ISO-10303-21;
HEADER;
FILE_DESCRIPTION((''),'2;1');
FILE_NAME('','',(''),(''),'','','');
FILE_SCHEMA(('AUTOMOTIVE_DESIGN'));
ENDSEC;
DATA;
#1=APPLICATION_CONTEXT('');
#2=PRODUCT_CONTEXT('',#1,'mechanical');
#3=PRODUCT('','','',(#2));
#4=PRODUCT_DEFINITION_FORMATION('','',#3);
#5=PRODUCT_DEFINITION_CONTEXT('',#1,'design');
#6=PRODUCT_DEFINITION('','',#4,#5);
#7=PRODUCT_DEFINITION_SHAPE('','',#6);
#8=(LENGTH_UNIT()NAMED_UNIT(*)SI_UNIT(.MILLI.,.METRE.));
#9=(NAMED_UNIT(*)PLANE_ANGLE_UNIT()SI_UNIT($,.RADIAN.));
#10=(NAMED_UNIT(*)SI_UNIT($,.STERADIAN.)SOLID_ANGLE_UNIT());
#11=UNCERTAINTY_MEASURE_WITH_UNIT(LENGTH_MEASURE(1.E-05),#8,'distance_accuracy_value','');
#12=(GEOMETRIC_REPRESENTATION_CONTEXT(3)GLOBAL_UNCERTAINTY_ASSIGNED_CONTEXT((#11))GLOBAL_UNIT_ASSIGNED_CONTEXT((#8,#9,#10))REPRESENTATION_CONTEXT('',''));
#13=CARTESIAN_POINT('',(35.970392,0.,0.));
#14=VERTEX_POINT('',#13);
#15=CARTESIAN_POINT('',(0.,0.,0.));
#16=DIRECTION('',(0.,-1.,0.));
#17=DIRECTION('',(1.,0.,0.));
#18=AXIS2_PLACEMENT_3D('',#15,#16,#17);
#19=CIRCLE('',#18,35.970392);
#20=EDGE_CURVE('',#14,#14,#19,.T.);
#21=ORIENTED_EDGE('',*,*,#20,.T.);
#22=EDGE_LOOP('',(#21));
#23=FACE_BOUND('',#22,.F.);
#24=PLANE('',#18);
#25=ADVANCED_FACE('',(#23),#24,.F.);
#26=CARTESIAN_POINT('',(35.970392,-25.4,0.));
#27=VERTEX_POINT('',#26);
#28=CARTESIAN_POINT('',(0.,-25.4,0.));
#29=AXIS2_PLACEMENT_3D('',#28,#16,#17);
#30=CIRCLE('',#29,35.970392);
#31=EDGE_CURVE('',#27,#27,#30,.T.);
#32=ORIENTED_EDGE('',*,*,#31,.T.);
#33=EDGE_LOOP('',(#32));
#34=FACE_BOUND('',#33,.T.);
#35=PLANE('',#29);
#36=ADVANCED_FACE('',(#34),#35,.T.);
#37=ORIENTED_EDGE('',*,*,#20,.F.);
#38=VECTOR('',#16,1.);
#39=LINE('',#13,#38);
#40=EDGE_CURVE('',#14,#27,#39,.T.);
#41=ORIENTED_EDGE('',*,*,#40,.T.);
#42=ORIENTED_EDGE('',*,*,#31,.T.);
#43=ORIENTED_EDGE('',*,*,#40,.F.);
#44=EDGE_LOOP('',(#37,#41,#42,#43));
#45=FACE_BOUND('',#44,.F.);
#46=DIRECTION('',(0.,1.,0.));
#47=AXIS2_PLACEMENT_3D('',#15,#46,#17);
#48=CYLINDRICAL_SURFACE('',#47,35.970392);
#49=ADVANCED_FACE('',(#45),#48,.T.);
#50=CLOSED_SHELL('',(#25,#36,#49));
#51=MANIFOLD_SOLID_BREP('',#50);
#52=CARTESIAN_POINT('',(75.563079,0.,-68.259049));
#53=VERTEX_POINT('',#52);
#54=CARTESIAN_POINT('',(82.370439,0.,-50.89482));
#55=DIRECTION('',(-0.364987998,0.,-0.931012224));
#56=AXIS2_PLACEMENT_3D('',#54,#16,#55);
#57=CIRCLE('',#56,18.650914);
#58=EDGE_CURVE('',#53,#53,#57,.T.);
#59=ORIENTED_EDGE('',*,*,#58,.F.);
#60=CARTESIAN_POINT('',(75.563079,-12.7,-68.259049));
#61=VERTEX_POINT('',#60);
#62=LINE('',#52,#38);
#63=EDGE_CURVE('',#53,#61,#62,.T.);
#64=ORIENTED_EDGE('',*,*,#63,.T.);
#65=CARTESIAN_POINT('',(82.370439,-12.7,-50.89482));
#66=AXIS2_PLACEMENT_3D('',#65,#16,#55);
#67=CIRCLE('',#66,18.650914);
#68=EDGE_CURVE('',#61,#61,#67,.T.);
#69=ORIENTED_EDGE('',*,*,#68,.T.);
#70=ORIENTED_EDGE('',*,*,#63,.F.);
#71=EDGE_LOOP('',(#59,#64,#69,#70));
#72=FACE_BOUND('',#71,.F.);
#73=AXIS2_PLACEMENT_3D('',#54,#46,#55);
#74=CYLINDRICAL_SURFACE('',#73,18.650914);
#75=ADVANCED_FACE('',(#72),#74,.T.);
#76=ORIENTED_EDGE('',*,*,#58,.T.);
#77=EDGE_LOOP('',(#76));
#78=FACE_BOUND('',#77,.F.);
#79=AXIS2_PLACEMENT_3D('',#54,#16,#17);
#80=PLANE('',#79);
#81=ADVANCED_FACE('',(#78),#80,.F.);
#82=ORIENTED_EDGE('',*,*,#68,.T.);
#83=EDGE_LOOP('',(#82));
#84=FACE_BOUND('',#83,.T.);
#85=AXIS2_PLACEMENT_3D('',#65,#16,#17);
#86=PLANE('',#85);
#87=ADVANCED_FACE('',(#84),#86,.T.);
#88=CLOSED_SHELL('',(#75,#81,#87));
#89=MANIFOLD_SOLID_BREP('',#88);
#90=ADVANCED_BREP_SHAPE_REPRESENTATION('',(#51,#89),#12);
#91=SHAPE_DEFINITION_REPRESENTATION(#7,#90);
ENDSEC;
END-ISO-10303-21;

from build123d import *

# Parameters (mm, degrees)
F1_DEPTH = 25.4
F2_DEPTH = 12.7


with BuildPart() as f1:
    # F0 (on Front) → F1 (new body)
    with BuildSketch(Plane.XZ):
        with BuildLine():
            ThreePointArc((-13.128761544, -33.488874266), (20.2684777915, -29.7162899316), (35.9703917032, 0))
            ThreePointArc((35.9703917032, 0), (20.2684777915, 29.7162899316), (-13.128761544, 33.488874266))
            ThreePointArc((-13.128761544, 33.488874266), (-35.9703917032, 0), (-13.128761544, -33.488874266))
        make_face()
    extrude(amount=F1_DEPTH)


with BuildPart() as f2:
    # F0 (on Front) → F2 (new body)
    with BuildSketch(Plane.XZ):
        with BuildLine():
            ThreePointArc((101.021352664, -50.8948202871), (71.8610828041, -35.4867042121), (75.5630787029, -68.2590493472))
            ThreePointArc((75.5630787029, -68.2590493472), (92.8797942312, -66.3029363622), (101.021352664, -50.8948202871))
        make_face()
    extrude(amount=F2_DEPTH)


solid = Compound([f1.part, f2.part])
